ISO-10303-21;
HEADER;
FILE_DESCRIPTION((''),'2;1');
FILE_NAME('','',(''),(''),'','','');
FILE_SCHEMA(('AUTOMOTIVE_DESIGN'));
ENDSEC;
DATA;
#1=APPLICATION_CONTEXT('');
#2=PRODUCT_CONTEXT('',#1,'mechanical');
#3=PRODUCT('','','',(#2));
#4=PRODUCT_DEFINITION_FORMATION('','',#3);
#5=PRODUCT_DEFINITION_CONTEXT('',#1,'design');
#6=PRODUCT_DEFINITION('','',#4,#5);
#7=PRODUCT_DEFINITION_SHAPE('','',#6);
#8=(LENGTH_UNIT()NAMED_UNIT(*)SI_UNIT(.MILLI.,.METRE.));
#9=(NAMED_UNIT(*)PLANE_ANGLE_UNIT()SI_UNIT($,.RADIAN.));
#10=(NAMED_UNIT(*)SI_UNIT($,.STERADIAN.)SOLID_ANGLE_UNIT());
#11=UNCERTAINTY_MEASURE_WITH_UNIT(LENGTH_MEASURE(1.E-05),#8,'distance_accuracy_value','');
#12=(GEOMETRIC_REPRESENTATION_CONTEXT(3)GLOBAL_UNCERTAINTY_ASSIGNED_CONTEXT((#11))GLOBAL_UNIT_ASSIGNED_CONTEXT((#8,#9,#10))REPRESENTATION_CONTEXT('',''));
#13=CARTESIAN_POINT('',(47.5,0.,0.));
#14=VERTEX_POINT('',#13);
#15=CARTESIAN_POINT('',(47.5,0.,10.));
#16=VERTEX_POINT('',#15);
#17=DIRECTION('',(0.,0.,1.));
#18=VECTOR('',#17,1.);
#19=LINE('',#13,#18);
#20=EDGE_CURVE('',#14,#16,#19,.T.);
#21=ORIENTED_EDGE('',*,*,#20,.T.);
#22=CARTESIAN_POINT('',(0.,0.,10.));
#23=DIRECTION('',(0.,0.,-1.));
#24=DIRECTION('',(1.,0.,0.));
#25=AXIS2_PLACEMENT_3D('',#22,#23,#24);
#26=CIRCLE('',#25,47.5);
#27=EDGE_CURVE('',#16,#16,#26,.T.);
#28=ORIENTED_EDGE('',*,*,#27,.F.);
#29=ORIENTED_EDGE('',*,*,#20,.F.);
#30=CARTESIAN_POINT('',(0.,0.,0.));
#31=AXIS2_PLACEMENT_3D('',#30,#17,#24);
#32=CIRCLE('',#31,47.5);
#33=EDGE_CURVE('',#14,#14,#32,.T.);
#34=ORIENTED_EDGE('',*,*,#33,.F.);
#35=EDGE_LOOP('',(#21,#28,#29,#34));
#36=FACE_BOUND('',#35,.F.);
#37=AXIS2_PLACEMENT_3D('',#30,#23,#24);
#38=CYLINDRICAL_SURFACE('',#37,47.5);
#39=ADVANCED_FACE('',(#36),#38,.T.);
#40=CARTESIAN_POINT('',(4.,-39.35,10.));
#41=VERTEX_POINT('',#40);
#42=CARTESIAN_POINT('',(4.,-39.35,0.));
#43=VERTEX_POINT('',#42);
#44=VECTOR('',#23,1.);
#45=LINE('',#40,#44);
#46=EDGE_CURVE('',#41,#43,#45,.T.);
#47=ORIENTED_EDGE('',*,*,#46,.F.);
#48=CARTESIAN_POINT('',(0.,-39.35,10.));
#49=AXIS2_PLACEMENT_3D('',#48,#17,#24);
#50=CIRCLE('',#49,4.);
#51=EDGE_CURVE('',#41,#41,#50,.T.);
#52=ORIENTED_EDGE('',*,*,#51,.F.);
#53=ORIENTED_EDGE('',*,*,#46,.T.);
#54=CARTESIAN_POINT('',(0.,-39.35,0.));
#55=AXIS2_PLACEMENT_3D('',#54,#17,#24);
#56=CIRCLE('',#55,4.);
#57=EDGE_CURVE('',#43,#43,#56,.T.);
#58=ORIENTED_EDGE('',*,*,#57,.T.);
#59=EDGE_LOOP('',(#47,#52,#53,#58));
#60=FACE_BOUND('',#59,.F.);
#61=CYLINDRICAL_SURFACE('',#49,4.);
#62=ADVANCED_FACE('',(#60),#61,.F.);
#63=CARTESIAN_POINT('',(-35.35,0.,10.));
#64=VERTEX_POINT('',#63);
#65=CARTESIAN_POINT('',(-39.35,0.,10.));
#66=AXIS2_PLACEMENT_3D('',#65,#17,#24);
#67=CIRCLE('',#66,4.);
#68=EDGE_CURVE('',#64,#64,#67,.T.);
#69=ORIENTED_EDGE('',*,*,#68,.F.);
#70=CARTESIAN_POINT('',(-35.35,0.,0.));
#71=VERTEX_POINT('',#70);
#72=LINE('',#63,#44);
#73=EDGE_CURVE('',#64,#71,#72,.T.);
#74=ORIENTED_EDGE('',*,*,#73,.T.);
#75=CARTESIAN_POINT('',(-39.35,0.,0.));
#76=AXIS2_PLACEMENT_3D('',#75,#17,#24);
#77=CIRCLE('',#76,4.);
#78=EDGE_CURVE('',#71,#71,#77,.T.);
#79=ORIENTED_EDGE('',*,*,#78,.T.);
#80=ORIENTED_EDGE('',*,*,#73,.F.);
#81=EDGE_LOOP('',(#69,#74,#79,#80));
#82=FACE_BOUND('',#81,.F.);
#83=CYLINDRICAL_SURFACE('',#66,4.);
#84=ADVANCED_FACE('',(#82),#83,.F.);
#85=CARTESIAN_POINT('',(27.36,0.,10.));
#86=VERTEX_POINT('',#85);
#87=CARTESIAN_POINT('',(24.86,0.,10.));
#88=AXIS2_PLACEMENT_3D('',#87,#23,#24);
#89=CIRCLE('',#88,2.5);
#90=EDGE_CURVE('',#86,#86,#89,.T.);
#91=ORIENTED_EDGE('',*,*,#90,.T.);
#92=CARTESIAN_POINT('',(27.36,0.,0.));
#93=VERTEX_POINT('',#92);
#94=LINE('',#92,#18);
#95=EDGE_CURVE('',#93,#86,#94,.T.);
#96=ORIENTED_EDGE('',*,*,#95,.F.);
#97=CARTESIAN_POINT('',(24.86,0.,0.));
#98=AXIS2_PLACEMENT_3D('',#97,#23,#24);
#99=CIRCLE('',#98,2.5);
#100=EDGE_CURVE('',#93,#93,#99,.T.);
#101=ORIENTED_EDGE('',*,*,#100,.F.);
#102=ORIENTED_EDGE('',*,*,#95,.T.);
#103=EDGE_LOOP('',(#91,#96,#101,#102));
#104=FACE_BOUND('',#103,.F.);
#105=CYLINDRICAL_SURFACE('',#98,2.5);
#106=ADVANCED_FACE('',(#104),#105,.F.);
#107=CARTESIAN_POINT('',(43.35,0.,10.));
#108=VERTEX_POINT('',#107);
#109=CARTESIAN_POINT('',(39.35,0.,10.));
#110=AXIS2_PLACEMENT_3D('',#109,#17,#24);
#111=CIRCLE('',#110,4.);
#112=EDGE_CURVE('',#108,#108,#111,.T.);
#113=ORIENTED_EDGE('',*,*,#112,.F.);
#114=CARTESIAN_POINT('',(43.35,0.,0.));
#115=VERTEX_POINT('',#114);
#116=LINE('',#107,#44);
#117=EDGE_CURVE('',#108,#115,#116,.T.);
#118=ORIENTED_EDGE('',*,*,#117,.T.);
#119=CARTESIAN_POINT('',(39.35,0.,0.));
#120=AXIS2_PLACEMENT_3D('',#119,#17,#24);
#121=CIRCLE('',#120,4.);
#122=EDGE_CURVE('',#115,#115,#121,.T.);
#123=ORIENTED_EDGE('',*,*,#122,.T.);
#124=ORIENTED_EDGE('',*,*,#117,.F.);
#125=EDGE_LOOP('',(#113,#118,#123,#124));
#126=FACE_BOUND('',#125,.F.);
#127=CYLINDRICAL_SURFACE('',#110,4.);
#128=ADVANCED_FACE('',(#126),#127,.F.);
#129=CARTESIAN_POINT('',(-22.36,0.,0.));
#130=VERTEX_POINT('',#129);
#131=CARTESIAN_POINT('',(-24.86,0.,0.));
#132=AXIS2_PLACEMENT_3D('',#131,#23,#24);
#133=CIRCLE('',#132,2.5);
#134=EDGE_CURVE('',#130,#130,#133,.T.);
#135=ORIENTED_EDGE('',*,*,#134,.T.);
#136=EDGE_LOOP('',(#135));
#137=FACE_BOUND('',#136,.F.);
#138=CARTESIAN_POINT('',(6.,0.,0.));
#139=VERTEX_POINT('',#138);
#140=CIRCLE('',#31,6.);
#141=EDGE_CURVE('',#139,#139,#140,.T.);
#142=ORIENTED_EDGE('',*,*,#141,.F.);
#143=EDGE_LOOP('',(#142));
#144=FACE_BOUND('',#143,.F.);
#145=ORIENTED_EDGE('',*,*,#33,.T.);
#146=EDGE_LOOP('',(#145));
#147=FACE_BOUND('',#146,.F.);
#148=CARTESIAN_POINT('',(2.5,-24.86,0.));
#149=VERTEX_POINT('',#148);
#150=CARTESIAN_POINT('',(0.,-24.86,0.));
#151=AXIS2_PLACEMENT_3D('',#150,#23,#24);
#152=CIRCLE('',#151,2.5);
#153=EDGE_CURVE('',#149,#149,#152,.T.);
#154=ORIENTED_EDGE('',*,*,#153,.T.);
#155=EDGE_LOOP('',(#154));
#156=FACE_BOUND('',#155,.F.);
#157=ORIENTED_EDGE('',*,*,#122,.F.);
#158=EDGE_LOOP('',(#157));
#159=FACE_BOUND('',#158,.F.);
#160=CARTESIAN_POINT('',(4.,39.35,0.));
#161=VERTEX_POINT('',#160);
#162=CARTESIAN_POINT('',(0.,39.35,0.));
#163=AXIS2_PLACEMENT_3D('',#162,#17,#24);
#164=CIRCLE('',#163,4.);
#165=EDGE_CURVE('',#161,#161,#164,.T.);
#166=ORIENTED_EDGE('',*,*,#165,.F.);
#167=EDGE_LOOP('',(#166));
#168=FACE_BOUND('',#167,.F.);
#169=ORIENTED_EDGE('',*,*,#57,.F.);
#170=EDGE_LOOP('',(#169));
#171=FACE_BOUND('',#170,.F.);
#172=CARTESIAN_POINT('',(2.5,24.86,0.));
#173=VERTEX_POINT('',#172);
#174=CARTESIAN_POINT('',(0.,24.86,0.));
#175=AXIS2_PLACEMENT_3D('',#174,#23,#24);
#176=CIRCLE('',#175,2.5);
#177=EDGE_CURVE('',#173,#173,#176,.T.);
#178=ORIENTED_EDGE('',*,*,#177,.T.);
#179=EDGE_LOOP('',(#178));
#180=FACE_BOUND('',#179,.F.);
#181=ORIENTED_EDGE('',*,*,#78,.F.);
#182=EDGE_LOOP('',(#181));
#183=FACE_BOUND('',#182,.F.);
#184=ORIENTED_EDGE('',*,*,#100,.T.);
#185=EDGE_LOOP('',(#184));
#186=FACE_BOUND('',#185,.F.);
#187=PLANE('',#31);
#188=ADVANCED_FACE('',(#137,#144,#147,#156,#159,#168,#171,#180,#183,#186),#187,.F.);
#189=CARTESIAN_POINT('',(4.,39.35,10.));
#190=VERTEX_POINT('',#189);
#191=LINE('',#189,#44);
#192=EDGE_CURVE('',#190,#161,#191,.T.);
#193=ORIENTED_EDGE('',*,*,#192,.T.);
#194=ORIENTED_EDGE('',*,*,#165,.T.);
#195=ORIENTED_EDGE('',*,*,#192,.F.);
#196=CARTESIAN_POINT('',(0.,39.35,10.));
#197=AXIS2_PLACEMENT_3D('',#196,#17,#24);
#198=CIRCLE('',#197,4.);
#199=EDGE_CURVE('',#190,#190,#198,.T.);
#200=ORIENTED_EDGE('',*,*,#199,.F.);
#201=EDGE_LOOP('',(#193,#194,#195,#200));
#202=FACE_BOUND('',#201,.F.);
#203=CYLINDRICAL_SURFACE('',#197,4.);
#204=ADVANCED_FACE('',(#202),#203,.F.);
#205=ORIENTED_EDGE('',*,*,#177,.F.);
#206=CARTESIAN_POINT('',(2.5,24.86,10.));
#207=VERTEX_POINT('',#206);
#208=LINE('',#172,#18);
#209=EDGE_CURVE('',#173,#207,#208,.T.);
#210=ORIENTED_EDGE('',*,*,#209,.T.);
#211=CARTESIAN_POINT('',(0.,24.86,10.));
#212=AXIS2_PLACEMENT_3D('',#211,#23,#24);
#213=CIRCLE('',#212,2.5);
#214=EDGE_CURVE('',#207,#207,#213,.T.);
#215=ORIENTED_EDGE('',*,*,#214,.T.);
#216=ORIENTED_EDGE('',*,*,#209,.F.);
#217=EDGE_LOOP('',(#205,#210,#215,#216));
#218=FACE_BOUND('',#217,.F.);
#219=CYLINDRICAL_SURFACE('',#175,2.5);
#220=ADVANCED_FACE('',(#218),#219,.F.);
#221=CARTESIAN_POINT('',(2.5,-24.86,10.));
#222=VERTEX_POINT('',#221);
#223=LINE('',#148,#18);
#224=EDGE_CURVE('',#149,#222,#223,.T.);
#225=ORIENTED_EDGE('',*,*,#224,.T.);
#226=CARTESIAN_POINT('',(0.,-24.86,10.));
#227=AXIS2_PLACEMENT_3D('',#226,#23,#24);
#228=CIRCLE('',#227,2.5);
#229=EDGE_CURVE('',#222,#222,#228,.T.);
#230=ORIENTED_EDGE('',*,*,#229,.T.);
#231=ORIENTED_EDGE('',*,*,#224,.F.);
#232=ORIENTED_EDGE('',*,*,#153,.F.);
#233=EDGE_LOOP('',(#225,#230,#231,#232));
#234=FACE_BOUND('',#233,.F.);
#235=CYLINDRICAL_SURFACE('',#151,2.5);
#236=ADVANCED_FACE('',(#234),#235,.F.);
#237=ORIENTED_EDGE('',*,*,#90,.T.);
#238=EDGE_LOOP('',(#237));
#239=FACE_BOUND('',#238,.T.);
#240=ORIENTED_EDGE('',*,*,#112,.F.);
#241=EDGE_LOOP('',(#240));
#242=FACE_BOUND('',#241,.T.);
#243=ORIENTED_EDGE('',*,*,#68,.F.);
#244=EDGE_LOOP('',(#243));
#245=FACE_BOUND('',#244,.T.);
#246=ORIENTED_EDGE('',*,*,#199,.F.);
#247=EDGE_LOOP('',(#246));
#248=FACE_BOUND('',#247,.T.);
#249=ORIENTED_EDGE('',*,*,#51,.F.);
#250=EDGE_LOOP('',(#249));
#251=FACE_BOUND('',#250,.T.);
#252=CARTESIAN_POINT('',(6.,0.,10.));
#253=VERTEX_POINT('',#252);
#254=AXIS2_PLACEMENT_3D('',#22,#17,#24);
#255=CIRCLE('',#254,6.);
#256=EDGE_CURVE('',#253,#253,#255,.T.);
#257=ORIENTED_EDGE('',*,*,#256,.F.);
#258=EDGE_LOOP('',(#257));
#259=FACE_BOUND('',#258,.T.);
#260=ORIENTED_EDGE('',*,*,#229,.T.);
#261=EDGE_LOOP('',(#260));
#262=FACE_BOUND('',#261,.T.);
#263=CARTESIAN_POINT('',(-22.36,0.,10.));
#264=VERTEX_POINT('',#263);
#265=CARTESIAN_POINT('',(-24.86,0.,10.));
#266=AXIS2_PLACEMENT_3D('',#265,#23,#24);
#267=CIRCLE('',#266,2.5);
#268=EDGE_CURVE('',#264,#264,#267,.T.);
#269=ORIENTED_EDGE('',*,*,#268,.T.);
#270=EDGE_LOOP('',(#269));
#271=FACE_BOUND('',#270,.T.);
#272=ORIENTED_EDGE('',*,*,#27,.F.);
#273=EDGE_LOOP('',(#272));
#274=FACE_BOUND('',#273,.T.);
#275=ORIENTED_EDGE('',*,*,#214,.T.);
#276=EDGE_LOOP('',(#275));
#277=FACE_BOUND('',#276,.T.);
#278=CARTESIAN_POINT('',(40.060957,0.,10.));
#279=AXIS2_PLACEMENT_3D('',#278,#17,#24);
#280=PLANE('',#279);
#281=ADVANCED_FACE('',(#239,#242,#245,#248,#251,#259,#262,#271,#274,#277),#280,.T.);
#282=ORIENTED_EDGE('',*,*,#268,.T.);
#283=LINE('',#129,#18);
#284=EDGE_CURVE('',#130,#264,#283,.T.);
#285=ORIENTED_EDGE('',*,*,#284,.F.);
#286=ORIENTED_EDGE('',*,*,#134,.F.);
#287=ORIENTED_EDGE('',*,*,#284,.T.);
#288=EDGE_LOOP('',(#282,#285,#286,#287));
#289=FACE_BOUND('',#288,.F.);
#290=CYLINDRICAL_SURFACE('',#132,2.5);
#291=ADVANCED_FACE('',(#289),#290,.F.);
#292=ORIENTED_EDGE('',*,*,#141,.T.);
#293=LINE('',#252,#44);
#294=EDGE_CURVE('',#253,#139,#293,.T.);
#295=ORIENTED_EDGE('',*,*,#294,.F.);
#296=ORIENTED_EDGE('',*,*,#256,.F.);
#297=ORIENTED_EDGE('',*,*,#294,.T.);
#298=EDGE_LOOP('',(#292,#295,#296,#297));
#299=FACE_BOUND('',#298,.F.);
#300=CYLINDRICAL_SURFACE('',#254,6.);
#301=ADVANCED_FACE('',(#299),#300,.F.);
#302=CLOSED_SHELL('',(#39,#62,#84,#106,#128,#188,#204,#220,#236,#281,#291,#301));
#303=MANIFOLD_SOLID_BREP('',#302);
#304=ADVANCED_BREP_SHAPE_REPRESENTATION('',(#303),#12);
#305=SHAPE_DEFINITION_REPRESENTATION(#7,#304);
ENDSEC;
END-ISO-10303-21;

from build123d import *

# Parameters (mm, degrees)
F0_R      = 47.5
F1_DEPTH  = 45
F2_W      = 40.64
F2_H      = 40.64
F3_DEPTH  = 35
F4_R      = 6
F6_DEPTH  = 10.001
F7_W      = 7.9080420285
F7_H      = 7.9080420285
F8_DEPTH  = 35
F9_R      = 4
F10_DEPTH = 10.001
F11_DEPTH = 35
F12_R     = 2.5
F13_DEPTH = 10.001


with BuildPart() as f1:
    # F0 (on Top) → F1 (new body)
    with BuildSketch(Plane.XY):
        Circle(F0_R)
    extrude(amount=F1_DEPTH)

    # F2 (on face) → F3 (cut)
    with BuildSketch(Plane.XY.offset(45)):
        Rectangle(F2_W, F2_H)
    extrude(amount=-F3_DEPTH, mode=Mode.SUBTRACT)

    # F4 (on face) → F6 (cut, through all)
    with BuildSketch(Plane.XY.offset(10)):
        Circle(F4_R)
    extrude(amount=-F6_DEPTH, mode=Mode.SUBTRACT)

    # F7 (on face) → F8 (cut)
    with BuildSketch(Plane.XY.offset(45)):
        Polygon((37.3080420285, 37.3080420285), (37.3080420285, 29.4), (29.4, 29.4), (29.4, -29.4), (37.3080420285, -29.4), (37.3080420285, -37.3080420285), (49.4, -37.3080420285), (49.4, 37.3080420285), align=None)
        with Locations((33.3540210142, 33.3540210142)):
            Rectangle(F7_W, F7_H)
        Polygon((-29.4, 29.4), (29.4, 29.4), (29.4, 37.3080420285), (37.3080420285, 37.3080420285), (37.3080420285, 49.4), (-37.3080420285, 49.4), (-37.3080420285, 37.3080420285), (-29.4, 37.3080420285), align=None)
        Polygon((-29.4, -29.4), (-29.4, 29.4), (-37.3080420285, 29.4), (-37.3080420285, 37.3080420285), (-49.4, 37.3080420285), (-49.4, -37.3080420285), (-37.3080420285, -37.3080420285), (-37.3080420285, -29.4), align=None)
        with Locations((-33.3540210142, 33.3540210142)):
            Rectangle(F7_W, F7_H)
        Polygon((29.4, -37.3080420285), (29.4, -29.4), (-29.4, -29.4), (-29.4, -37.3080420285), (-37.3080420285, -37.3080420285), (-37.3080420285, -49.4), (37.3080420285, -49.4), (37.3080420285, -37.3080420285), align=None)
        with Locations((33.3540210142, -33.3540210142)):
            Rectangle(F7_W, F7_H)
        with Locations((-33.3540210142, -33.3540210142)):
            Rectangle(F7_W, F7_H)
    extrude(amount=-F8_DEPTH, mode=Mode.SUBTRACT)

    # F9 (on face) → F10 (cut, through all)
    with BuildSketch(Plane.XY.offset(10)):
        with Locations((0, 39.35)):
            Circle(F9_R)
        with Locations((39.35, 0)):
            Circle(F9_R)
        with Locations((0, -39.35)):
            Circle(F9_R)
        with Locations((-39.35, 0)):
            Circle(F9_R)
    extrude(amount=-F10_DEPTH, mode=Mode.SUBTRACT)

    # F11 (cut): a face of the model
    f11_faces = [f1.faces().sort_by_distance(p)[0] for p in [
        (0, -28.5684424253, 45),
    ]]
    extrude(f11_faces, amount=-F11_DEPTH, mode=Mode.SUBTRACT)

    # F12 (on face) → F13 (cut, through all)
    with BuildSketch(Plane(origin=(0, 0, 0), x_dir=(1, 0, 0), z_dir=(0, 0, -1))):
        with Locations((0, 24.86)):
            Circle(F12_R)
        with Locations((24.86, 0)):
            Circle(F12_R)
        with Locations((0, -24.86)):
            Circle(F12_R)
        with Locations((-24.86, 0)):
            Circle(F12_R)
    extrude(amount=-F13_DEPTH, mode=Mode.SUBTRACT)


solid = f1.part
